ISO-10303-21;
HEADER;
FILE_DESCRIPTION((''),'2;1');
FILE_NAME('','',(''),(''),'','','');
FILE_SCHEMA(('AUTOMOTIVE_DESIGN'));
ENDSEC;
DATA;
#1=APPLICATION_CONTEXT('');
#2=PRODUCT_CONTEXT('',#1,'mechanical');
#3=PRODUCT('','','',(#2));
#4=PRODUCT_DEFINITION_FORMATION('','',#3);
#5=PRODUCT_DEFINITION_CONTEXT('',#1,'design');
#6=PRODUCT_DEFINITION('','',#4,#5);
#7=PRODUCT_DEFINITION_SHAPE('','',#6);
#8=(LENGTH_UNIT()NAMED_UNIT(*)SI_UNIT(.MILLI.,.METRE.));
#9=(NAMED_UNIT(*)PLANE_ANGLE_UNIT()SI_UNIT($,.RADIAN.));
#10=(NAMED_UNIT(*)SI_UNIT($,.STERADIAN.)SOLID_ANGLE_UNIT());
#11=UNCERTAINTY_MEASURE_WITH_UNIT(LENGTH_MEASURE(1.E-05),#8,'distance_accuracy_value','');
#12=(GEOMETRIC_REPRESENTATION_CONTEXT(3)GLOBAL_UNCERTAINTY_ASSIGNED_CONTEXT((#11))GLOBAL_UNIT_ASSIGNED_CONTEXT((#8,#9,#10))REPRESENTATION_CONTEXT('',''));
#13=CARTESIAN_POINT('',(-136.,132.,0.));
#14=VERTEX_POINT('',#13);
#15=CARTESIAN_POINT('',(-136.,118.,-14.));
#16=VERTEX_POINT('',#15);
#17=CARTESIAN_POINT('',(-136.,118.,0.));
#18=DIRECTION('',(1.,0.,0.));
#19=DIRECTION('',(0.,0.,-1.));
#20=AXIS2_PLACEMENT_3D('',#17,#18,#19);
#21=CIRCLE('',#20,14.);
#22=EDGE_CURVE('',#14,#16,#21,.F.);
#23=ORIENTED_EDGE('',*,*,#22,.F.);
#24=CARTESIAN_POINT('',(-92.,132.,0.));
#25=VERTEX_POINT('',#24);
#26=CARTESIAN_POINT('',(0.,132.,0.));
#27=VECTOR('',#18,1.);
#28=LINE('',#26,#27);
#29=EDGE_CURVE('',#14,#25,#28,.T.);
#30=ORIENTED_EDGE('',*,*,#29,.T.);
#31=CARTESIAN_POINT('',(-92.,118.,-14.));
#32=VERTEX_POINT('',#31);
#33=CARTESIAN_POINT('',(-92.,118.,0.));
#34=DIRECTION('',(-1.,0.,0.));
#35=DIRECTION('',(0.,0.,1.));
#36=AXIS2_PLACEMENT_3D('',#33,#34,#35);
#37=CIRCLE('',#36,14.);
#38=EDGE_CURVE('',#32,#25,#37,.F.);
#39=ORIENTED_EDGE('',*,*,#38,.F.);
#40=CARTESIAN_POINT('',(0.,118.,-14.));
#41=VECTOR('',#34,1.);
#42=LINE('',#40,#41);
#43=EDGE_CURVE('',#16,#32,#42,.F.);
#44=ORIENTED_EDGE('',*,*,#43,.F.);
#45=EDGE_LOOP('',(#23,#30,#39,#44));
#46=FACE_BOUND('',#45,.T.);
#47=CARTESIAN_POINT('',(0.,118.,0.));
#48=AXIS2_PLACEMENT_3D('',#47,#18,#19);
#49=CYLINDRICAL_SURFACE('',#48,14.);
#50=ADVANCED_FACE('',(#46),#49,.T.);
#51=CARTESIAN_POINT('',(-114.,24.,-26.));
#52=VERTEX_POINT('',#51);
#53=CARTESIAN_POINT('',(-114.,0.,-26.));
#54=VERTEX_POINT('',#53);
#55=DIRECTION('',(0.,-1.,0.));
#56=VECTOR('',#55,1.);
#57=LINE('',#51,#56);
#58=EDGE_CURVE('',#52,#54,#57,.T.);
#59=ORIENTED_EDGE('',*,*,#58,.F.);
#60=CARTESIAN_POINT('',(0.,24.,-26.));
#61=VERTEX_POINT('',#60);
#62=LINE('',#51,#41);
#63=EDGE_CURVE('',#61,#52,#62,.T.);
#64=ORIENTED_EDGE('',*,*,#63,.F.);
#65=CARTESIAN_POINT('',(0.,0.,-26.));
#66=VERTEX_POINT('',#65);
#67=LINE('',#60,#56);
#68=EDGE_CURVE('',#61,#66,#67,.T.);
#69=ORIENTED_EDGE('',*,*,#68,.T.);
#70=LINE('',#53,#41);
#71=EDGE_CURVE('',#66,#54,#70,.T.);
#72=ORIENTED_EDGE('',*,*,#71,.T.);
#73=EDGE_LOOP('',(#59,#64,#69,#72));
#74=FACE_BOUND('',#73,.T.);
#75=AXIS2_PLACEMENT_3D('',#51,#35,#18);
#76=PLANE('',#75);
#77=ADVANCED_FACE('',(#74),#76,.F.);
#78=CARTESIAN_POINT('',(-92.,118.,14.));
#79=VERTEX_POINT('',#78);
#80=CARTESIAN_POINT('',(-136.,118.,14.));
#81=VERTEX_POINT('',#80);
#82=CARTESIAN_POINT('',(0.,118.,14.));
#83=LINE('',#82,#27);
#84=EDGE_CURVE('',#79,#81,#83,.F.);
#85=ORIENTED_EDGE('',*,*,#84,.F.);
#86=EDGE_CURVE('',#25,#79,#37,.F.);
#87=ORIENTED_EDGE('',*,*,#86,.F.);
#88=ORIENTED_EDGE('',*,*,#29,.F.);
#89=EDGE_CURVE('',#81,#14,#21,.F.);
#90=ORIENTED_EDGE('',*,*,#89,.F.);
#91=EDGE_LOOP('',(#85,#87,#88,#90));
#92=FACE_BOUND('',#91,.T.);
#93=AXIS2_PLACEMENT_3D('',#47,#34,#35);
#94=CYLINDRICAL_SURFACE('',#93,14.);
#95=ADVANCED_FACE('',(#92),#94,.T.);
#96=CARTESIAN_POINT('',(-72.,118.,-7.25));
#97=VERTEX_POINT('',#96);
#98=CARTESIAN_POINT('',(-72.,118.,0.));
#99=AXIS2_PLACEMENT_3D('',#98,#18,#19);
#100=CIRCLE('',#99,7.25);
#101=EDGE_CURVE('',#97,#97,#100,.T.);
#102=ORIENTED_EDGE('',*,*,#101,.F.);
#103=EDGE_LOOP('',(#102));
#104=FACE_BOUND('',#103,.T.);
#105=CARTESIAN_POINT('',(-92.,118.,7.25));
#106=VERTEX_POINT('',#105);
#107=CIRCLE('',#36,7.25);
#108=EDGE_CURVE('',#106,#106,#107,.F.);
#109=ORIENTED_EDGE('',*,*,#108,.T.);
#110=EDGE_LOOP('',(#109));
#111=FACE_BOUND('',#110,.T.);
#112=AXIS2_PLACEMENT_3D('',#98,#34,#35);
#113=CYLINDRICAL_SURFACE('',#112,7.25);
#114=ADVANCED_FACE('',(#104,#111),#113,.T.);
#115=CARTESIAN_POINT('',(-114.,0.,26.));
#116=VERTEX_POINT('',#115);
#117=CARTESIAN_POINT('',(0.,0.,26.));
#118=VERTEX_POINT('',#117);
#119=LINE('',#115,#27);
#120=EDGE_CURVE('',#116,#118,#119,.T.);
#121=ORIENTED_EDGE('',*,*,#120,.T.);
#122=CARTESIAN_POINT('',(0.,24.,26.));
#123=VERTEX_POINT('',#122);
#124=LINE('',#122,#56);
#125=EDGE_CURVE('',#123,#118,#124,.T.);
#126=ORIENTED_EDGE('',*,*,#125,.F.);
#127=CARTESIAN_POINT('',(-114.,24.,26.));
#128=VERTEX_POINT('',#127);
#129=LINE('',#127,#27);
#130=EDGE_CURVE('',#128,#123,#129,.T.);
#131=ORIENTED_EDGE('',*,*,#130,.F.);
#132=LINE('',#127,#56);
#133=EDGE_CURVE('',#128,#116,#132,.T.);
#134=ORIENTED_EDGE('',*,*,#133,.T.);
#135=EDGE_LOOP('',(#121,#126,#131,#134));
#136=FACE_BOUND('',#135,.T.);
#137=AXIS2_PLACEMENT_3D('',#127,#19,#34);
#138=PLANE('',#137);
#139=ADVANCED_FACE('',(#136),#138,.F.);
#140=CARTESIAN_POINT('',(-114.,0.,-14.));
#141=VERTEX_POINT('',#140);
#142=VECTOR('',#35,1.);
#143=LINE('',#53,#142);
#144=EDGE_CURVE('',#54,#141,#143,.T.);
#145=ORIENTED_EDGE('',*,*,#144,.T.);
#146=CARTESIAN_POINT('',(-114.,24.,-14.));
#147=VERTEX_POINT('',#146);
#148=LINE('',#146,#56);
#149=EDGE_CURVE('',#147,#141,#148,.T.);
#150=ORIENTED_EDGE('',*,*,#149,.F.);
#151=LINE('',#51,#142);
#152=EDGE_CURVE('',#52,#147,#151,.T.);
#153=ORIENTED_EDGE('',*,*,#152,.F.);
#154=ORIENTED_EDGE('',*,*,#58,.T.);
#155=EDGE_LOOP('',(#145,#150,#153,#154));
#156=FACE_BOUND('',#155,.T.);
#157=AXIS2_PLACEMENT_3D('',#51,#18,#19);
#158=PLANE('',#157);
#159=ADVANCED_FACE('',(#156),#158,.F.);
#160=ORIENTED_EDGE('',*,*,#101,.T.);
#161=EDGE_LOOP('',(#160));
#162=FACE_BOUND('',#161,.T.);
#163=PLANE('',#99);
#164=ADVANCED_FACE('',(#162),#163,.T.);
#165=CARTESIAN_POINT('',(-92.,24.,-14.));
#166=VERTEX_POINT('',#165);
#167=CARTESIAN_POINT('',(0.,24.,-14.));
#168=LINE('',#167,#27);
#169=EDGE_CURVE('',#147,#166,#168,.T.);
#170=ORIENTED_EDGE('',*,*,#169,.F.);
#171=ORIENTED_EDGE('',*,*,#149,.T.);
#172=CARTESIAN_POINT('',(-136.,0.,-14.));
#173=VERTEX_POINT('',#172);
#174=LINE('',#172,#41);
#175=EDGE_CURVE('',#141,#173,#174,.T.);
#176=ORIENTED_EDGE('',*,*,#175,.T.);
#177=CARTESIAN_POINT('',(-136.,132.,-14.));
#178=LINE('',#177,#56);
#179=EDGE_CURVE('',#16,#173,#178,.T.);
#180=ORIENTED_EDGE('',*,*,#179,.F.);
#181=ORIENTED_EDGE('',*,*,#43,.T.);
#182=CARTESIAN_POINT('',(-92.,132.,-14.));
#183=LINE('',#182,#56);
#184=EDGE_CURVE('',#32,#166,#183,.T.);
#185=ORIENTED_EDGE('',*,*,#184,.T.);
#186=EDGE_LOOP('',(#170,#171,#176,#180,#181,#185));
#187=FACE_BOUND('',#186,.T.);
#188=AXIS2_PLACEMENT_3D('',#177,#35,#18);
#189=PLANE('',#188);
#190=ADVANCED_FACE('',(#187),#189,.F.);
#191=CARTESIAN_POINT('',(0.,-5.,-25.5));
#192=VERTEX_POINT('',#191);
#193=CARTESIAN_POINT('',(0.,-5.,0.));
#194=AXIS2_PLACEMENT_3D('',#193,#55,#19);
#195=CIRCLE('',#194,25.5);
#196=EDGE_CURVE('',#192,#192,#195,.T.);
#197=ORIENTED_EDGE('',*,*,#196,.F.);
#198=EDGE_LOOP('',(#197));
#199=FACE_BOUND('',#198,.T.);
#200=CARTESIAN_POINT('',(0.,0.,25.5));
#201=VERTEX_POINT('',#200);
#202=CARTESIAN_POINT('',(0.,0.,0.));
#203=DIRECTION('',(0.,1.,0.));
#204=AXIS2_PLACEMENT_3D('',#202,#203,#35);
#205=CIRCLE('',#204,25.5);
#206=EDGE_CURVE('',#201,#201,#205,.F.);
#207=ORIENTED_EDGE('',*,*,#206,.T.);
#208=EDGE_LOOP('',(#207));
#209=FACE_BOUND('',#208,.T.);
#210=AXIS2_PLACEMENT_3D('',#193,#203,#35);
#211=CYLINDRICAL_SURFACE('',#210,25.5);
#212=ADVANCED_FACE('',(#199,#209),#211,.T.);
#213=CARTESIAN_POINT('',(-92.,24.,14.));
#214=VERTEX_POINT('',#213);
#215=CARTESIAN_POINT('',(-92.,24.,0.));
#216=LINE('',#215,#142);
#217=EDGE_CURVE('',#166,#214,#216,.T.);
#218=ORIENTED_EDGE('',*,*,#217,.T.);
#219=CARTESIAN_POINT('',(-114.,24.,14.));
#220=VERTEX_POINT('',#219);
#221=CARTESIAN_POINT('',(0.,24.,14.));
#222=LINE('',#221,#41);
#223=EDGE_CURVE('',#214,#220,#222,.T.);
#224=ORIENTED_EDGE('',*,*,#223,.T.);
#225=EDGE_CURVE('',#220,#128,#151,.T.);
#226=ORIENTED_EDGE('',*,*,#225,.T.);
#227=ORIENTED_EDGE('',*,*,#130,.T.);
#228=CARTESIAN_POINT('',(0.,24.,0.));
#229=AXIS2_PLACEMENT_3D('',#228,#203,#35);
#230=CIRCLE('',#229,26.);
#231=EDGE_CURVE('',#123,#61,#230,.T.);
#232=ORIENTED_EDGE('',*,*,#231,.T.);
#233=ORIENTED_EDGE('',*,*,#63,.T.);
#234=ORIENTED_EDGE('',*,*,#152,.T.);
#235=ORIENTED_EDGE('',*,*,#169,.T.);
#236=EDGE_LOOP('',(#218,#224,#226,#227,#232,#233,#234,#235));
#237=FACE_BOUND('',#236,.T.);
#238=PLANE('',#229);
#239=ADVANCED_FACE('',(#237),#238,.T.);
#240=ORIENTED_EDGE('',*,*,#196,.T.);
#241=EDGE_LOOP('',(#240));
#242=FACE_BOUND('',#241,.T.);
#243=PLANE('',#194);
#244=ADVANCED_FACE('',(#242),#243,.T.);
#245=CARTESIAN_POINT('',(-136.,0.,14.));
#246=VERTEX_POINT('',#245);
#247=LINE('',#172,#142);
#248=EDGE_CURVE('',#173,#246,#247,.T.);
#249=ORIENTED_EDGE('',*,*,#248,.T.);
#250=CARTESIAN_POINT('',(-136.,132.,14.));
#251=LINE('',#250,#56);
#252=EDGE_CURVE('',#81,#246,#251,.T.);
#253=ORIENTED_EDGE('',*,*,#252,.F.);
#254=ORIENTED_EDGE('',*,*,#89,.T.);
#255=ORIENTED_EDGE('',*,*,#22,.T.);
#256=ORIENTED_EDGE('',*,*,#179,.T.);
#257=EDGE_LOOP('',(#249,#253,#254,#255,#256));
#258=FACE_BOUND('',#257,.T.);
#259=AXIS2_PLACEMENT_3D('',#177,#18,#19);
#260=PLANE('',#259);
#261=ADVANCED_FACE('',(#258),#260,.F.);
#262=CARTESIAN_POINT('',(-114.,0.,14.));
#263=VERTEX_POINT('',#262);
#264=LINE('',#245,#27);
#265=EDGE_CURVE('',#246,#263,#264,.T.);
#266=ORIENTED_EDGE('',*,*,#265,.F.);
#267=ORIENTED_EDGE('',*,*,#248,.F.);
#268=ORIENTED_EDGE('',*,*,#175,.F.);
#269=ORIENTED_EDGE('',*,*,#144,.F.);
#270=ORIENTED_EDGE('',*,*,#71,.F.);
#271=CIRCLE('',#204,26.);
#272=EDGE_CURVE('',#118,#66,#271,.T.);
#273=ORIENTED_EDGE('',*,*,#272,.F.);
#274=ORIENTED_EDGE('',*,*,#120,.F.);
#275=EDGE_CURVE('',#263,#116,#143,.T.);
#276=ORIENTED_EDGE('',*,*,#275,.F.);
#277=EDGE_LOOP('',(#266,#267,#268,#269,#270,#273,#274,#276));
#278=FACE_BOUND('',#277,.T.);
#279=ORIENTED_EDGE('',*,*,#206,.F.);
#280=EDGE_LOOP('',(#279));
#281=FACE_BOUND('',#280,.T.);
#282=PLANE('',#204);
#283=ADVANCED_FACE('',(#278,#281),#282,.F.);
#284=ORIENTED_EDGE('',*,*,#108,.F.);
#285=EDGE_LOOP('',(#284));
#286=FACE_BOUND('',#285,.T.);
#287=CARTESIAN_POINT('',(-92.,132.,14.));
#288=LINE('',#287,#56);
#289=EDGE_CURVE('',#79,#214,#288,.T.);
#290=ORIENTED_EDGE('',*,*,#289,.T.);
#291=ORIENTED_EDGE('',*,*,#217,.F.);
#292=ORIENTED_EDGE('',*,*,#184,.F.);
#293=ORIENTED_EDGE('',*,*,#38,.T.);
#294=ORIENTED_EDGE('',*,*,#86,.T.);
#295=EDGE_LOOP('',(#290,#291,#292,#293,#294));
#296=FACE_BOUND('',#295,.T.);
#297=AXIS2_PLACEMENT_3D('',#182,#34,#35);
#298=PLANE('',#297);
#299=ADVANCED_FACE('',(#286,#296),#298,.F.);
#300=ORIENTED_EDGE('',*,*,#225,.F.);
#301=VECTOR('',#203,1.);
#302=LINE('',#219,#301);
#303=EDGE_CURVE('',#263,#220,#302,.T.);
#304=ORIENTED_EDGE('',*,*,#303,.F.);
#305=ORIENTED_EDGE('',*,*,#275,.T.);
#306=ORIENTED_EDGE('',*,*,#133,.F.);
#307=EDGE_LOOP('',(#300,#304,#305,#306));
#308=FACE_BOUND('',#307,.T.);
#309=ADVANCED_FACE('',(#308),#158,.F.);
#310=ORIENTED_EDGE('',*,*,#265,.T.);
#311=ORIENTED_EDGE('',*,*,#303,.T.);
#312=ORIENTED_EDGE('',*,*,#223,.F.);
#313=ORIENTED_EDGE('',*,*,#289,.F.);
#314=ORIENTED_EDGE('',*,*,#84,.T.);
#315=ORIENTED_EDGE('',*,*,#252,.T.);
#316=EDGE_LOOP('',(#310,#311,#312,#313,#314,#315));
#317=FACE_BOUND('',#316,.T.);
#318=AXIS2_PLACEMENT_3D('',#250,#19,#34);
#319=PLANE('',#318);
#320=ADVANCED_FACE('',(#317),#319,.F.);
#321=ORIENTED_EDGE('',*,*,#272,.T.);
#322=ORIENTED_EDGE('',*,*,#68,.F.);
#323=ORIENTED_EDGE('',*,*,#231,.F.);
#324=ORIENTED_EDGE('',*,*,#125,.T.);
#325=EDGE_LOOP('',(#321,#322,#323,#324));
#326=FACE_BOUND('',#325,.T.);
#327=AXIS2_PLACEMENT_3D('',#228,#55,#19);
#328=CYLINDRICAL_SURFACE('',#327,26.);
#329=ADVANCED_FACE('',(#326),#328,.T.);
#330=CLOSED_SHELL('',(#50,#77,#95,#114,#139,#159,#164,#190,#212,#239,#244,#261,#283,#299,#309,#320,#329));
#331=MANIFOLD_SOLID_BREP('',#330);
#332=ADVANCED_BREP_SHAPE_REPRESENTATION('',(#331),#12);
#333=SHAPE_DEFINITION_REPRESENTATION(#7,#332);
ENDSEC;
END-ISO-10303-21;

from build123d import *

# Parameters (mm, degrees)
BOSS_EXTRUDE2_DEPTH = 24
SKETCH2_R           = 25.5
BOSS_EXTRUDE3_DEPTH = 5
SKETCH3_W           = 44
SKETCH3_H           = 28
BOSS_EXTRUDE4_DEPTH = 132
FILLET2_R           = 14
FILLET5_R           = 14
SKETCH4_R           = 7.25
BOSS_EXTRUDE5_DEPTH = 20


with BuildPart() as part:
    # Sketch1 → Boss-Extrude2 (new body)
    with BuildSketch(Plane(origin=(0, 0, 0), x_dir=(1, 0, 0), z_dir=(0, 1, 0))):
        with BuildLine():
            Line((-114, 26), (0, 26))
            ThreePointArc((0, 26), (26, 0), (0, -26))
            Line((0, -26), (-114, -26))
            Line((-114, -26), (-114, 26))
        make_face()
    extrude(amount=BOSS_EXTRUDE2_DEPTH)

    # Sketch2 → Boss-Extrude3 (add)
    with BuildSketch(Plane.XZ):
        with Locations(Location((0, 0, 0), (0, 0, 90))):
            Circle(SKETCH2_R)
    extrude(amount=BOSS_EXTRUDE3_DEPTH)

    # Sketch3 → Boss-Extrude4 (add)
    with BuildSketch(Plane(origin=(0, 0, 0), x_dir=(1, 0, 0), z_dir=(0, 1, 0))):
        with Locations((-114, 0)):
            Rectangle(SKETCH3_W, SKETCH3_H)
    extrude(amount=BOSS_EXTRUDE4_DEPTH)

    # Fillet2
    fillet2_edges = [part.edges().sort_by_distance(p)[0] for p in [
        (-114, 132, 14),
    ]]
    fillet(fillet2_edges, radius=FILLET2_R)

    # Fillet5
    fillet5_edges = [part.edges().sort_by_distance(p)[0] for p in [
        (-114, 132, -14),
    ]]
    fillet(fillet5_edges, radius=FILLET5_R - 0.0001)  # a hair under: the kernel refuses the full size

    # Sketch4 → Boss-Extrude5 (add)
    with BuildSketch(Plane(origin=(-92, 0, 0), x_dir=(0, 0, -1), z_dir=(1, 0, 0))):
        with Locations(Location((0, 118, 0), (0, 0, 180))):
            Circle(SKETCH4_R)
    extrude(amount=BOSS_EXTRUDE5_DEPTH)


solid = part.part
